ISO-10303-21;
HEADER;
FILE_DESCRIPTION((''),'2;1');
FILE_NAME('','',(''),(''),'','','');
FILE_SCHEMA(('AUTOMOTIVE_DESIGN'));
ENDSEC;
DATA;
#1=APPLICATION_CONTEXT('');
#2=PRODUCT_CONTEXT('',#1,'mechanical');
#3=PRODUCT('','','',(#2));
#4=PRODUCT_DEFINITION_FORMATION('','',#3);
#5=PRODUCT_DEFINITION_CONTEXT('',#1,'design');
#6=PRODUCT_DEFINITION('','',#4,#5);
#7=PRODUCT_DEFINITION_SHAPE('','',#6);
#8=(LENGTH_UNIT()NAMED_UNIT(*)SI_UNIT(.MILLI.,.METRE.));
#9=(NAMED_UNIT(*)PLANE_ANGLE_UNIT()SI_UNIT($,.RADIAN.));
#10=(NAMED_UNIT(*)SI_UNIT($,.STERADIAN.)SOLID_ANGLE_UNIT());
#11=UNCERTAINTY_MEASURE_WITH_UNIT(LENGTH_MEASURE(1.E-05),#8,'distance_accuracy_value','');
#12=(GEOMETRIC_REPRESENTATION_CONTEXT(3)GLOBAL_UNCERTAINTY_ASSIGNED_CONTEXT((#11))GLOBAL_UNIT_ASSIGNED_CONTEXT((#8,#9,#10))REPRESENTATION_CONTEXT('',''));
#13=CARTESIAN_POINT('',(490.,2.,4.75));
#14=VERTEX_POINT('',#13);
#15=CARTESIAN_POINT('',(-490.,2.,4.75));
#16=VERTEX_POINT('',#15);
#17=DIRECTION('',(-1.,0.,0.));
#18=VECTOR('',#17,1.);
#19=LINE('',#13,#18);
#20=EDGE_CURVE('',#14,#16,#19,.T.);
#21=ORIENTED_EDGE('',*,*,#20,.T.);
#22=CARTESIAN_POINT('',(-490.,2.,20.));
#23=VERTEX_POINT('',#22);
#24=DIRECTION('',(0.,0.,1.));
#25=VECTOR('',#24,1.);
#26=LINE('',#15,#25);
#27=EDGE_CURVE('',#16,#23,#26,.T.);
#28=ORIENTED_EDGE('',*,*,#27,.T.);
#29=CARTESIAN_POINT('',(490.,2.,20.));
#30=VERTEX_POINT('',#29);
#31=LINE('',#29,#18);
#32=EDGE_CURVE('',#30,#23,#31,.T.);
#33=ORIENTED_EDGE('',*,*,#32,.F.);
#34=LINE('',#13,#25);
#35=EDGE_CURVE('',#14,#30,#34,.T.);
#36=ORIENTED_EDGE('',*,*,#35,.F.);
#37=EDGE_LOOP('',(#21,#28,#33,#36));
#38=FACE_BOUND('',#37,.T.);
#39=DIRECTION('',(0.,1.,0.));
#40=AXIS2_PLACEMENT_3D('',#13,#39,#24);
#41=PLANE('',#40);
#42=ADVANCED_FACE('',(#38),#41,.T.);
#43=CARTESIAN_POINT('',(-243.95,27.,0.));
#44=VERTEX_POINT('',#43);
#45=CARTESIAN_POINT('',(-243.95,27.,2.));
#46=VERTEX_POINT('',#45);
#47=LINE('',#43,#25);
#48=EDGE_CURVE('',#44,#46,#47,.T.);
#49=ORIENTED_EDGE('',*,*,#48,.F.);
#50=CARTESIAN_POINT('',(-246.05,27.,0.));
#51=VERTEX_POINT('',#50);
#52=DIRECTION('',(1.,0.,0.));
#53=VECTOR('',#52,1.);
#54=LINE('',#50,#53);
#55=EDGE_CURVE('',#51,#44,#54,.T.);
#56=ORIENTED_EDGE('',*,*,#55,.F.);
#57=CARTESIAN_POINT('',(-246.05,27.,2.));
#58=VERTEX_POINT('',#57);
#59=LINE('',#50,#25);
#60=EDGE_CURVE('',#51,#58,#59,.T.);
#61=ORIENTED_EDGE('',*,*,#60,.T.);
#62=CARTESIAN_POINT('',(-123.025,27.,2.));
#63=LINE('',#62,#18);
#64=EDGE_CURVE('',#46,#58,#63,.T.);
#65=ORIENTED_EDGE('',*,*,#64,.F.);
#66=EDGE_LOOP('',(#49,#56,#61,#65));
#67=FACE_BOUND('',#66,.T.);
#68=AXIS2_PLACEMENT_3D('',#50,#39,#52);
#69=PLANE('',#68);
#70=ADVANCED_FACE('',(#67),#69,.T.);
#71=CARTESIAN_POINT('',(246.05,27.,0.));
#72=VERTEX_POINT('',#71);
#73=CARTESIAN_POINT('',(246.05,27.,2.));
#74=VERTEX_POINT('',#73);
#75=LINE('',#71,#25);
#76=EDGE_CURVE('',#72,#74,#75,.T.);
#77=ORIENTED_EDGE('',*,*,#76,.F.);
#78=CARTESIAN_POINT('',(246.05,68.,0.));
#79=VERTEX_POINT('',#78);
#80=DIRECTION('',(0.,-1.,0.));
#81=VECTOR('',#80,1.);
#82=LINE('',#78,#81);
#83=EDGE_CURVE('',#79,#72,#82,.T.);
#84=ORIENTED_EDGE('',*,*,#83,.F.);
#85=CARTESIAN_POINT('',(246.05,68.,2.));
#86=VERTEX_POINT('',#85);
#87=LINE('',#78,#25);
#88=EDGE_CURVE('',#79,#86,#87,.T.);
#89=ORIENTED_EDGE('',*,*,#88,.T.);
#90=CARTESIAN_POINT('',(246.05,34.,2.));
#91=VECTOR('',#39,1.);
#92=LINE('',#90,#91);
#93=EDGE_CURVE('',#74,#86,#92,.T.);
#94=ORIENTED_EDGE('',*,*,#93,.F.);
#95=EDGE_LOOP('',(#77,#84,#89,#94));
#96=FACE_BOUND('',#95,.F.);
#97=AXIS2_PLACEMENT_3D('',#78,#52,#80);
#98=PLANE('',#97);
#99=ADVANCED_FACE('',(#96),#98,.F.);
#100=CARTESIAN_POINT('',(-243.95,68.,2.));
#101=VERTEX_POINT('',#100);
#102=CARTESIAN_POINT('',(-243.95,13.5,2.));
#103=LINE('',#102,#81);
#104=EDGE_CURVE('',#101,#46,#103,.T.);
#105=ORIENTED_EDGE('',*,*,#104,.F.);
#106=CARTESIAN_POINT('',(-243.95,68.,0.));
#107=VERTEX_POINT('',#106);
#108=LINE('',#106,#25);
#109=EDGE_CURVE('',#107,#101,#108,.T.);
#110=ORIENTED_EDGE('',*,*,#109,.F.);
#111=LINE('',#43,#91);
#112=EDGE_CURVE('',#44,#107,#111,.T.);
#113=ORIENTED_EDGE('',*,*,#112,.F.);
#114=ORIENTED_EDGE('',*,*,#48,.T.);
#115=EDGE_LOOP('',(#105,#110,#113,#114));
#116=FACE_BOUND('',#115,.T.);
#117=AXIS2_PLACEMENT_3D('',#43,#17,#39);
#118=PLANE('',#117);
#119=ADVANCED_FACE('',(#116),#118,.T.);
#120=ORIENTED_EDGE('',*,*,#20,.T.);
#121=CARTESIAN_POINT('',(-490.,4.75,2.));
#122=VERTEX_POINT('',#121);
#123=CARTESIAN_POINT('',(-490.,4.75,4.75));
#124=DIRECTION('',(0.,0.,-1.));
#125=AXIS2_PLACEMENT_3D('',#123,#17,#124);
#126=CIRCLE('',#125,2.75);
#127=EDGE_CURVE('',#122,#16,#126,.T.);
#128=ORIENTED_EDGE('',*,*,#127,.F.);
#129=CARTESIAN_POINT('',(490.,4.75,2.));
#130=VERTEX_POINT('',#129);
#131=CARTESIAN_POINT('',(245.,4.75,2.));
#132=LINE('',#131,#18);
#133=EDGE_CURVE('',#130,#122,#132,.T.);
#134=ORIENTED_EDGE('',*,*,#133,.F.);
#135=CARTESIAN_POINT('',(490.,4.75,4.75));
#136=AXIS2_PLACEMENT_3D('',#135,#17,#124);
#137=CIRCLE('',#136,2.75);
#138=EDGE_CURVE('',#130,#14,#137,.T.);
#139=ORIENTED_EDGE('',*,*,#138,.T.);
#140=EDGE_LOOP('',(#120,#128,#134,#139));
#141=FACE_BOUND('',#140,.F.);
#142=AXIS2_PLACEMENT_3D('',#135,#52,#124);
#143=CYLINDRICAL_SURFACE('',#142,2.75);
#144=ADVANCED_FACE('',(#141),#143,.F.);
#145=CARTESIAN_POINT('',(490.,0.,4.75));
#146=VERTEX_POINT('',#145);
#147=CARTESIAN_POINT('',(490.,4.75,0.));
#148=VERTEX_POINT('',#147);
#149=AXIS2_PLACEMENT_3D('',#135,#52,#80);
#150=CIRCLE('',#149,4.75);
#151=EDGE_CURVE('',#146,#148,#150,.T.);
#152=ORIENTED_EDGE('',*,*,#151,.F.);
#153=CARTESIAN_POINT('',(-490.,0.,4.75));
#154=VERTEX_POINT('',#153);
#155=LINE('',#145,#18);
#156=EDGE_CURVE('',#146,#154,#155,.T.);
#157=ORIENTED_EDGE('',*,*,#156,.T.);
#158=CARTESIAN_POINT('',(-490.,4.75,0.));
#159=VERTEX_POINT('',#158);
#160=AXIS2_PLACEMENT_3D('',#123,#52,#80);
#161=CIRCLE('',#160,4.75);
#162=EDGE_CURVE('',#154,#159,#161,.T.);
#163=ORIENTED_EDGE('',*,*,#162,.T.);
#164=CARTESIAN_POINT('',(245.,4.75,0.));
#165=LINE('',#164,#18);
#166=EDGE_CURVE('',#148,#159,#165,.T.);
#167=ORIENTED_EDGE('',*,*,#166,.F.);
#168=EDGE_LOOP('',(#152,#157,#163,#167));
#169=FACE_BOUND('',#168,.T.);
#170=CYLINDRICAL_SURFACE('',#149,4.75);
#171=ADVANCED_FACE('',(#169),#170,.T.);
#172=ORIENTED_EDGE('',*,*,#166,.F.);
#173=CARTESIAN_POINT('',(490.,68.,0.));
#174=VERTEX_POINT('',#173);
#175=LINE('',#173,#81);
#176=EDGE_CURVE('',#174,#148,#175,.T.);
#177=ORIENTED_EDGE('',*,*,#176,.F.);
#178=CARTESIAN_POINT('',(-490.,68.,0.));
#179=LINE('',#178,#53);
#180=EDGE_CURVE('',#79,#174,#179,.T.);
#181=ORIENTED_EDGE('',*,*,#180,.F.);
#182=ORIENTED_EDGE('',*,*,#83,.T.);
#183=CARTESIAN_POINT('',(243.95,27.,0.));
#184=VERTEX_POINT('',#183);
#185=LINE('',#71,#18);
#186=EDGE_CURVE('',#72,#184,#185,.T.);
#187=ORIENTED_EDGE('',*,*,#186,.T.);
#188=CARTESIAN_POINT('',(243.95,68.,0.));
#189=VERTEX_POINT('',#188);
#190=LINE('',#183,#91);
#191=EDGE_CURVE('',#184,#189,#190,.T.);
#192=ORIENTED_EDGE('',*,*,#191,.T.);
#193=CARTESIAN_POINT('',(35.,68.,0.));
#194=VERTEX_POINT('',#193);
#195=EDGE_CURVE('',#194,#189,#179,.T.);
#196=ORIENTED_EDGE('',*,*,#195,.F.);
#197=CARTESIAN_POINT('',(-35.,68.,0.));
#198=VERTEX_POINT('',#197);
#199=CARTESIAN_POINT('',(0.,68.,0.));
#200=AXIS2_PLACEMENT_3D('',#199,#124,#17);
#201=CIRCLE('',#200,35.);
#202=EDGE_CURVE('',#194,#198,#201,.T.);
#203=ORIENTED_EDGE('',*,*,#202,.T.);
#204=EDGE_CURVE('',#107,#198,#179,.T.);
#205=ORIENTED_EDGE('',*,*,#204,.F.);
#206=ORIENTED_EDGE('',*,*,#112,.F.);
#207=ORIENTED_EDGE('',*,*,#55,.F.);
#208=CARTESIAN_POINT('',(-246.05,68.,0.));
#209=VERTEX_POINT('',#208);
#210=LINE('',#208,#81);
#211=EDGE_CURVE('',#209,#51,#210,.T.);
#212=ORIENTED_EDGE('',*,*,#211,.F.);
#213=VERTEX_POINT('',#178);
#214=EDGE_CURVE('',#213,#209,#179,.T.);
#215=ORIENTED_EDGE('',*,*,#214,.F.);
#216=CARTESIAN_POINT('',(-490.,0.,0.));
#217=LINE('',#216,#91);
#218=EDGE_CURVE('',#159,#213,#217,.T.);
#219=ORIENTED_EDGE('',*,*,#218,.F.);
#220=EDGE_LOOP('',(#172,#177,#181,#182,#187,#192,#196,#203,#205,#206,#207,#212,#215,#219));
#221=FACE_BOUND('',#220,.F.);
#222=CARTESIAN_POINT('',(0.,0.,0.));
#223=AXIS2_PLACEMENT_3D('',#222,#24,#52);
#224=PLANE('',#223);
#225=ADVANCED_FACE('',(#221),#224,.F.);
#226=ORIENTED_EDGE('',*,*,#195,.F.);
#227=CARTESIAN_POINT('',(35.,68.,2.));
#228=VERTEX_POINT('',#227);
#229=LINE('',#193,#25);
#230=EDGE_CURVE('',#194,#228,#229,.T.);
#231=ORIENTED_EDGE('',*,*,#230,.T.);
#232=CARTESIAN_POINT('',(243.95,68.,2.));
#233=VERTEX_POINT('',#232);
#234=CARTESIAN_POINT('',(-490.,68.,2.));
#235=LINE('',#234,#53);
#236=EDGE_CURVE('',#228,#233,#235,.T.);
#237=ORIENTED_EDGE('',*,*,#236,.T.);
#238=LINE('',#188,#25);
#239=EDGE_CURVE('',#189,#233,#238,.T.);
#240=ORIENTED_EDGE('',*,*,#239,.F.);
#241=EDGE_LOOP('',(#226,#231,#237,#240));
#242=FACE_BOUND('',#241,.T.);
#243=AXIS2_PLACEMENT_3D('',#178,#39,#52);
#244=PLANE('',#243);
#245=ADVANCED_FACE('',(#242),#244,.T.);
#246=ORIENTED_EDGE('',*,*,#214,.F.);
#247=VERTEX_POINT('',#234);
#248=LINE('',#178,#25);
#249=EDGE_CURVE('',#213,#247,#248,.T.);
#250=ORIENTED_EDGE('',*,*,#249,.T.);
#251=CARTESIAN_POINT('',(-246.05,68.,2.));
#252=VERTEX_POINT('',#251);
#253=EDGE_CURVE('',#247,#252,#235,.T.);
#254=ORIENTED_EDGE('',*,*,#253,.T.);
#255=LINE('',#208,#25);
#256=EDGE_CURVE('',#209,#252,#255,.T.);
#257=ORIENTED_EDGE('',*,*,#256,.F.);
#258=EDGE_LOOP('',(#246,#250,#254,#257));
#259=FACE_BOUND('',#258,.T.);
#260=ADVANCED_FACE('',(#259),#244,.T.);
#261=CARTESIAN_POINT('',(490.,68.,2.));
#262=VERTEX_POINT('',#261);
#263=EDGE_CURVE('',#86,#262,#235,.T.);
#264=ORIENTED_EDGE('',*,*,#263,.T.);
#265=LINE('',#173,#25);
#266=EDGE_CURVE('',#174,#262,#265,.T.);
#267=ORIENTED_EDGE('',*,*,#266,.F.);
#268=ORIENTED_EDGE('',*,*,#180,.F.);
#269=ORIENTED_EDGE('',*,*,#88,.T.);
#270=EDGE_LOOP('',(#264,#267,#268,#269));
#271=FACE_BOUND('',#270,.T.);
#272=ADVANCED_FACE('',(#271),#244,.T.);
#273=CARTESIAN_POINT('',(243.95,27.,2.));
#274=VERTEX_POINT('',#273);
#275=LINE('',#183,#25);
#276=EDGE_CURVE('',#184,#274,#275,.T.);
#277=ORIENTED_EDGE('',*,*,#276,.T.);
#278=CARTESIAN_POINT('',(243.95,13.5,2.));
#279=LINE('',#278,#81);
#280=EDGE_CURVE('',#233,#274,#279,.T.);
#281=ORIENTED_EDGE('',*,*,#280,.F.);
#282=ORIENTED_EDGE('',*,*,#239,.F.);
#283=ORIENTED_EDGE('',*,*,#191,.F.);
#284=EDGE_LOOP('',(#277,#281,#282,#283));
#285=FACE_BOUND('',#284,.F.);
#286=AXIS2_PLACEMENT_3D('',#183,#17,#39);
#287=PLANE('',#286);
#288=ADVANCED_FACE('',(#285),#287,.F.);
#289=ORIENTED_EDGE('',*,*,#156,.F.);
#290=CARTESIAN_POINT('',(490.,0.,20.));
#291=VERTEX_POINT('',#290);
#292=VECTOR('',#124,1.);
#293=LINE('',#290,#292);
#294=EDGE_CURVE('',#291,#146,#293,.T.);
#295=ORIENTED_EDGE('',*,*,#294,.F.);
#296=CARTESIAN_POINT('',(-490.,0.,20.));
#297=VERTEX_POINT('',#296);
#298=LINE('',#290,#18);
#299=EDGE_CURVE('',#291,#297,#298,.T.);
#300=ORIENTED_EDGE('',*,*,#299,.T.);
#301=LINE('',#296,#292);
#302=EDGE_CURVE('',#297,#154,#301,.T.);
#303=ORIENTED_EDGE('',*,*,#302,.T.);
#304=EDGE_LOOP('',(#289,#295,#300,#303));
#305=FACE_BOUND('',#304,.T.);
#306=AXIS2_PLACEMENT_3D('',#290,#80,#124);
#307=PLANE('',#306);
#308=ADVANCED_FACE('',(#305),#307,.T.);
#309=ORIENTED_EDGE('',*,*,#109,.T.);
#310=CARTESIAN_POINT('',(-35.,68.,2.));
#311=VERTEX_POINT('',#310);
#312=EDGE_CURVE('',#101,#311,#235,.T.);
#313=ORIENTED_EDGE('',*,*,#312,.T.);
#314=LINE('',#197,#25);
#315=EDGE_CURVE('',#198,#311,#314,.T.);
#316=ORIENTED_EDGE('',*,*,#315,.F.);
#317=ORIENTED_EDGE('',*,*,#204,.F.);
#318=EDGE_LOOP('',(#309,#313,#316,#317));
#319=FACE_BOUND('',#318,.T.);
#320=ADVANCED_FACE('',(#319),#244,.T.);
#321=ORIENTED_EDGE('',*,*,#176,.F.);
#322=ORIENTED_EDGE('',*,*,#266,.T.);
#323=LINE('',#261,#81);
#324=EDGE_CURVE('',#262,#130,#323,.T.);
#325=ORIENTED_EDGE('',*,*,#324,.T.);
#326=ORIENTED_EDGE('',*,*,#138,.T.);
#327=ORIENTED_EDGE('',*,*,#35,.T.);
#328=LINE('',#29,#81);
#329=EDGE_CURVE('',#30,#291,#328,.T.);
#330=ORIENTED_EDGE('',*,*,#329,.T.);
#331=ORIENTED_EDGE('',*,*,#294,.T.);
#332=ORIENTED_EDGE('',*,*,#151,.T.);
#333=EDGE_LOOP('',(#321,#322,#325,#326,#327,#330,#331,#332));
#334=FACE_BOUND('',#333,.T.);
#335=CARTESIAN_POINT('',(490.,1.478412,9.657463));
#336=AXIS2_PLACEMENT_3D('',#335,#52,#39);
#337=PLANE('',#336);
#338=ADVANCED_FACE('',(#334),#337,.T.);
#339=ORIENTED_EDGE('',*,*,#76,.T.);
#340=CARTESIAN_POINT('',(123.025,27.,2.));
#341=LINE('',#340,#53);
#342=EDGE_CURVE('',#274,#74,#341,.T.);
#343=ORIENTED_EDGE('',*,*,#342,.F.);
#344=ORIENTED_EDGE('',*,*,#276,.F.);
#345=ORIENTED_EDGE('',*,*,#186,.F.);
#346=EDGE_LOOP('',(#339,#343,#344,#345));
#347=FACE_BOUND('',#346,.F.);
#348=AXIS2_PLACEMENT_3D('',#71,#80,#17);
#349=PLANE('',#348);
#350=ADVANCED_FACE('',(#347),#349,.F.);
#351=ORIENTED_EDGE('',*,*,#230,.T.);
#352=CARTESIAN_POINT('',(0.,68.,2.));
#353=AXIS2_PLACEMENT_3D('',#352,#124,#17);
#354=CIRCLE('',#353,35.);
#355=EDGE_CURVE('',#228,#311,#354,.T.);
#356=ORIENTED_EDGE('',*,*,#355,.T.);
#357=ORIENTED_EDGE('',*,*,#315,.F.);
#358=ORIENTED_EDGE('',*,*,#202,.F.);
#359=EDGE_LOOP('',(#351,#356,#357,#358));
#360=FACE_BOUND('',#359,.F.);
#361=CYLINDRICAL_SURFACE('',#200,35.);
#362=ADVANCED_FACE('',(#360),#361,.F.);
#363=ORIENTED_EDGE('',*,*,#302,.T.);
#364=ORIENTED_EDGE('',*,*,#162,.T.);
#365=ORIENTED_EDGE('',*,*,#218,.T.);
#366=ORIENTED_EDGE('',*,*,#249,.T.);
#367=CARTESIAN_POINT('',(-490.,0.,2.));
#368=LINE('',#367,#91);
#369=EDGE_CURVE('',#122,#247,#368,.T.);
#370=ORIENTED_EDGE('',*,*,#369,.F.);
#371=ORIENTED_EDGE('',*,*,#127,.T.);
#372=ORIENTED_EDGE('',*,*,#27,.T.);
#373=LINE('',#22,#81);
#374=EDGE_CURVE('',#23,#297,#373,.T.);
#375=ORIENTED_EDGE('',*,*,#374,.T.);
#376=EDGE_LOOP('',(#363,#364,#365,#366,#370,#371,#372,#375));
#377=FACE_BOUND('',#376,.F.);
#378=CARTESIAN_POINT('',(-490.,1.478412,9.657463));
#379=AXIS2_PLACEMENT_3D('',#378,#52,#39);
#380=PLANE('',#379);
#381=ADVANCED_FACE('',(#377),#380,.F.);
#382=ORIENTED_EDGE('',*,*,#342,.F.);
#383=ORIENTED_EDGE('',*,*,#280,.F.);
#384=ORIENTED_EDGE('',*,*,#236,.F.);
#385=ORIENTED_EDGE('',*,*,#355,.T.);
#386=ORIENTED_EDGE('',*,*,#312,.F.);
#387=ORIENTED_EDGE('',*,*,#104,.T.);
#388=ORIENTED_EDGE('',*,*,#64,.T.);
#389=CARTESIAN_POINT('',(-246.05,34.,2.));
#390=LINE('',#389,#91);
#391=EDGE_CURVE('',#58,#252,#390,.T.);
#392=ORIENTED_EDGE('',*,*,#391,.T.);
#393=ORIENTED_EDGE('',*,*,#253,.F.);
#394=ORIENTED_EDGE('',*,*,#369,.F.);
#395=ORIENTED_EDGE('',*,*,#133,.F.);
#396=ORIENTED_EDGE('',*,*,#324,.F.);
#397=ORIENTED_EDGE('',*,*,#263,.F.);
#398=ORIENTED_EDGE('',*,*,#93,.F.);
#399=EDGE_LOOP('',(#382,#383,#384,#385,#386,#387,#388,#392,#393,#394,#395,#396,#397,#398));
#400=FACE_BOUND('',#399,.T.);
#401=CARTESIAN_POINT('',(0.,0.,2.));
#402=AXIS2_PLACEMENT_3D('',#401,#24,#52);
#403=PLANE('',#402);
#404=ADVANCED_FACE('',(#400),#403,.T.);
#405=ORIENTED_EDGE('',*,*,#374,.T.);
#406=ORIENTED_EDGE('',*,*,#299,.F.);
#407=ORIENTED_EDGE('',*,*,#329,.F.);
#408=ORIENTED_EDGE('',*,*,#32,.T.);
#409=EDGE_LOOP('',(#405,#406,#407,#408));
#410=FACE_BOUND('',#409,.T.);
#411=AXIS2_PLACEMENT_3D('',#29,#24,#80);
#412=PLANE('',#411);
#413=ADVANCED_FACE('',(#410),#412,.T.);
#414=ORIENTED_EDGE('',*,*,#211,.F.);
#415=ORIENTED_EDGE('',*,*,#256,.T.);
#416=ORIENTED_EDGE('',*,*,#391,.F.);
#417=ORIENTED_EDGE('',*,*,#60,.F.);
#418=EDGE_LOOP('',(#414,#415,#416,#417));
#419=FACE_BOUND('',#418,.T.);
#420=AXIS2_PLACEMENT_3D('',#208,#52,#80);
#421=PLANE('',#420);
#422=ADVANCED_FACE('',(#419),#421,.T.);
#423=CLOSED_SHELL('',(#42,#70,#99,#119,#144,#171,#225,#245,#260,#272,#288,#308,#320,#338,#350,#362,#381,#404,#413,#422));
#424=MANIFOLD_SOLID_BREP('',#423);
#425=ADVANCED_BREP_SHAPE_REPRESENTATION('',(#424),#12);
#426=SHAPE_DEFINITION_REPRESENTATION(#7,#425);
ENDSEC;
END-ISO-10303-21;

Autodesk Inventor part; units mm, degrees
ref_plane "YZ Plane" through (0, 0, 0) normal (1, 0, 0) x (0, 1, 0)
ref_plane "XZ Plane" through (0, 0, 0) normal (0, 1, 0) x (-1, 0, 0)
ref_plane "XY Plane" through (0, 0, 0) normal (0, 0, 1) x (1, 0, 0)
sketch "Sketch1" plane through (0, 0, 0) normal (0, 0, 1) x (1, 0, 0)
  line L0 (-490, 68) -> (490, 68)
  line L1 (490, 68) -> (490, 0)
  line L2 (490, 0) -> (-490, 0)
  line L3 (-490, 0) -> (-490, 68)
  point P0 (0, 0)
  point P1 (0, 0)
  dimension "d0" = 980
  dimension "d1" = 68
extrude "Plate1" add sketch "Sketch1" along normal blind 2
sketch "Sketch2" plane through (490, 2, 0) normal (0, -1, 0) x (1, 0, 0)
  line L0 (-980, 0) -> (0, 0)
  line L1 (0, 0) -> (0, 20)
  line L2 (0, 20) -> (-980, 20)
  line L3 (-980, 20) -> (-980, 0)
edge flange "Flange1" height 20 angle 90 thickness 2 bend radius 2.75 thickness toward (0, -1, 0) relief round relief width 2 relief depth 1 edges at (0, 0, 2) wall of the first edge with corners at (-490, 2, 0) (490, 2, 0) (490, 2, 20) (-490, 2, 20)
bend "Bend1"
corner "Corner1"
sketch "Sketch5" plane through (0, 0, 0) normal (0, 0, -1) x (-1, 0, 0)
  line L0 (490, 68) -> (-490, 68) projected
  line L1 (490, 0) -> (-490, 0) projected
  circle A0 centre (0, 68) radius 35
  line L2 (243.95, 68) -> (246.05, 68)
  line L3 (246.05, 68) -> (246.05, 27)
  line L4 (246.05, 27) -> (243.95, 27)
  line L5 (243.95, 27) -> (243.95, 68)
  line L6 (-243.95, 68) -> (-246.05, 68)
  line L7 (-246.05, 68) -> (-246.05, 27)
  line L8 (-246.05, 27) -> (-243.95, 27)
  line L9 (-243.95, 27) -> (-243.95, 68)
  line L10 (0, 68) -> (0, 0) construction
  point P0 (0, 0)
  point P1 (245, 27)
  point P2 (-245, 27)
  point P3 (-35, 68)
  point P4 (35, 68)
  dimension "d45" = 70
  dimension "d48" = 2.1
  dimension "d49" = 490
  dimension "d51" = 27
  dimension "d52" = 41
extrude "Extrusion1" cut sketch "Sketch5" against normal through all contours L3 L4 L5 L0 | L9 L8 L7 L0 | A0 L0 picked at (-5.3545, 54.8926)
sketch "Sketch9" plane through (0, 0, 2) normal (0, 0, 1) x (1, 0, 0)
  line L0 (485.6141, 29.596) -> (485.6141, 17.596) construction
  line L1 (485.6141, 17.596) -> (285.6141, 17.596) construction
  line L2 (285.6141, 17.596) -> (285.6141, 29.596) construction
  line L3 (285.6141, 29.596) -> (485.6141, 29.596) construction
  line L4 (-490, 68) -> (490, 68) projected
  point P0 (0, 0)
  point P1 (1.05, 68)
  dimension "d40" = 200
  dimension "d41" = 12
mark "Mark2"
equation "\"d1\" = СПИНА_Стрингер_2_высота"
equation "\"d2\" = Thickness"
equation "\"d3\" = BendReliefWidth"
equation "\"d4\" = BendReliefDepth"
equation "\"d5\" = MinimumRemnant"
equation "\"d6\" = TransitionRadius"
equation "\"d9\" = BendRadius"
equation "\"d10\" = CornerReliefSize"
equation "\"d11\" = GapSize"
equation "\"d12\" = JacobiRadiusSize"
equation "\"BendReliefWidth\" = Thickness"
equation "\"BendReliefDepth\" = 0.5 * Thickness"
equation "\"CornerReliefSize\" = 4 * Thickness"
equation "\"MinimumRemnant\" = 2 * Thickness"
equation "\"TransitionRadius\" = BendRadius"
equation "\"JacobiRadiusSize\" = BendRadius"
equation "\"GapSize\" = Thickness"
equation "\"СПИНА_Стрингер_2_высота\" = 68"
equation "\"Thickness\" = 2"
equation "\"BendRadius\" = 2.75"
properties part number "MSC 206 STRINGER BACK ^^" material "Stainless Steel"
